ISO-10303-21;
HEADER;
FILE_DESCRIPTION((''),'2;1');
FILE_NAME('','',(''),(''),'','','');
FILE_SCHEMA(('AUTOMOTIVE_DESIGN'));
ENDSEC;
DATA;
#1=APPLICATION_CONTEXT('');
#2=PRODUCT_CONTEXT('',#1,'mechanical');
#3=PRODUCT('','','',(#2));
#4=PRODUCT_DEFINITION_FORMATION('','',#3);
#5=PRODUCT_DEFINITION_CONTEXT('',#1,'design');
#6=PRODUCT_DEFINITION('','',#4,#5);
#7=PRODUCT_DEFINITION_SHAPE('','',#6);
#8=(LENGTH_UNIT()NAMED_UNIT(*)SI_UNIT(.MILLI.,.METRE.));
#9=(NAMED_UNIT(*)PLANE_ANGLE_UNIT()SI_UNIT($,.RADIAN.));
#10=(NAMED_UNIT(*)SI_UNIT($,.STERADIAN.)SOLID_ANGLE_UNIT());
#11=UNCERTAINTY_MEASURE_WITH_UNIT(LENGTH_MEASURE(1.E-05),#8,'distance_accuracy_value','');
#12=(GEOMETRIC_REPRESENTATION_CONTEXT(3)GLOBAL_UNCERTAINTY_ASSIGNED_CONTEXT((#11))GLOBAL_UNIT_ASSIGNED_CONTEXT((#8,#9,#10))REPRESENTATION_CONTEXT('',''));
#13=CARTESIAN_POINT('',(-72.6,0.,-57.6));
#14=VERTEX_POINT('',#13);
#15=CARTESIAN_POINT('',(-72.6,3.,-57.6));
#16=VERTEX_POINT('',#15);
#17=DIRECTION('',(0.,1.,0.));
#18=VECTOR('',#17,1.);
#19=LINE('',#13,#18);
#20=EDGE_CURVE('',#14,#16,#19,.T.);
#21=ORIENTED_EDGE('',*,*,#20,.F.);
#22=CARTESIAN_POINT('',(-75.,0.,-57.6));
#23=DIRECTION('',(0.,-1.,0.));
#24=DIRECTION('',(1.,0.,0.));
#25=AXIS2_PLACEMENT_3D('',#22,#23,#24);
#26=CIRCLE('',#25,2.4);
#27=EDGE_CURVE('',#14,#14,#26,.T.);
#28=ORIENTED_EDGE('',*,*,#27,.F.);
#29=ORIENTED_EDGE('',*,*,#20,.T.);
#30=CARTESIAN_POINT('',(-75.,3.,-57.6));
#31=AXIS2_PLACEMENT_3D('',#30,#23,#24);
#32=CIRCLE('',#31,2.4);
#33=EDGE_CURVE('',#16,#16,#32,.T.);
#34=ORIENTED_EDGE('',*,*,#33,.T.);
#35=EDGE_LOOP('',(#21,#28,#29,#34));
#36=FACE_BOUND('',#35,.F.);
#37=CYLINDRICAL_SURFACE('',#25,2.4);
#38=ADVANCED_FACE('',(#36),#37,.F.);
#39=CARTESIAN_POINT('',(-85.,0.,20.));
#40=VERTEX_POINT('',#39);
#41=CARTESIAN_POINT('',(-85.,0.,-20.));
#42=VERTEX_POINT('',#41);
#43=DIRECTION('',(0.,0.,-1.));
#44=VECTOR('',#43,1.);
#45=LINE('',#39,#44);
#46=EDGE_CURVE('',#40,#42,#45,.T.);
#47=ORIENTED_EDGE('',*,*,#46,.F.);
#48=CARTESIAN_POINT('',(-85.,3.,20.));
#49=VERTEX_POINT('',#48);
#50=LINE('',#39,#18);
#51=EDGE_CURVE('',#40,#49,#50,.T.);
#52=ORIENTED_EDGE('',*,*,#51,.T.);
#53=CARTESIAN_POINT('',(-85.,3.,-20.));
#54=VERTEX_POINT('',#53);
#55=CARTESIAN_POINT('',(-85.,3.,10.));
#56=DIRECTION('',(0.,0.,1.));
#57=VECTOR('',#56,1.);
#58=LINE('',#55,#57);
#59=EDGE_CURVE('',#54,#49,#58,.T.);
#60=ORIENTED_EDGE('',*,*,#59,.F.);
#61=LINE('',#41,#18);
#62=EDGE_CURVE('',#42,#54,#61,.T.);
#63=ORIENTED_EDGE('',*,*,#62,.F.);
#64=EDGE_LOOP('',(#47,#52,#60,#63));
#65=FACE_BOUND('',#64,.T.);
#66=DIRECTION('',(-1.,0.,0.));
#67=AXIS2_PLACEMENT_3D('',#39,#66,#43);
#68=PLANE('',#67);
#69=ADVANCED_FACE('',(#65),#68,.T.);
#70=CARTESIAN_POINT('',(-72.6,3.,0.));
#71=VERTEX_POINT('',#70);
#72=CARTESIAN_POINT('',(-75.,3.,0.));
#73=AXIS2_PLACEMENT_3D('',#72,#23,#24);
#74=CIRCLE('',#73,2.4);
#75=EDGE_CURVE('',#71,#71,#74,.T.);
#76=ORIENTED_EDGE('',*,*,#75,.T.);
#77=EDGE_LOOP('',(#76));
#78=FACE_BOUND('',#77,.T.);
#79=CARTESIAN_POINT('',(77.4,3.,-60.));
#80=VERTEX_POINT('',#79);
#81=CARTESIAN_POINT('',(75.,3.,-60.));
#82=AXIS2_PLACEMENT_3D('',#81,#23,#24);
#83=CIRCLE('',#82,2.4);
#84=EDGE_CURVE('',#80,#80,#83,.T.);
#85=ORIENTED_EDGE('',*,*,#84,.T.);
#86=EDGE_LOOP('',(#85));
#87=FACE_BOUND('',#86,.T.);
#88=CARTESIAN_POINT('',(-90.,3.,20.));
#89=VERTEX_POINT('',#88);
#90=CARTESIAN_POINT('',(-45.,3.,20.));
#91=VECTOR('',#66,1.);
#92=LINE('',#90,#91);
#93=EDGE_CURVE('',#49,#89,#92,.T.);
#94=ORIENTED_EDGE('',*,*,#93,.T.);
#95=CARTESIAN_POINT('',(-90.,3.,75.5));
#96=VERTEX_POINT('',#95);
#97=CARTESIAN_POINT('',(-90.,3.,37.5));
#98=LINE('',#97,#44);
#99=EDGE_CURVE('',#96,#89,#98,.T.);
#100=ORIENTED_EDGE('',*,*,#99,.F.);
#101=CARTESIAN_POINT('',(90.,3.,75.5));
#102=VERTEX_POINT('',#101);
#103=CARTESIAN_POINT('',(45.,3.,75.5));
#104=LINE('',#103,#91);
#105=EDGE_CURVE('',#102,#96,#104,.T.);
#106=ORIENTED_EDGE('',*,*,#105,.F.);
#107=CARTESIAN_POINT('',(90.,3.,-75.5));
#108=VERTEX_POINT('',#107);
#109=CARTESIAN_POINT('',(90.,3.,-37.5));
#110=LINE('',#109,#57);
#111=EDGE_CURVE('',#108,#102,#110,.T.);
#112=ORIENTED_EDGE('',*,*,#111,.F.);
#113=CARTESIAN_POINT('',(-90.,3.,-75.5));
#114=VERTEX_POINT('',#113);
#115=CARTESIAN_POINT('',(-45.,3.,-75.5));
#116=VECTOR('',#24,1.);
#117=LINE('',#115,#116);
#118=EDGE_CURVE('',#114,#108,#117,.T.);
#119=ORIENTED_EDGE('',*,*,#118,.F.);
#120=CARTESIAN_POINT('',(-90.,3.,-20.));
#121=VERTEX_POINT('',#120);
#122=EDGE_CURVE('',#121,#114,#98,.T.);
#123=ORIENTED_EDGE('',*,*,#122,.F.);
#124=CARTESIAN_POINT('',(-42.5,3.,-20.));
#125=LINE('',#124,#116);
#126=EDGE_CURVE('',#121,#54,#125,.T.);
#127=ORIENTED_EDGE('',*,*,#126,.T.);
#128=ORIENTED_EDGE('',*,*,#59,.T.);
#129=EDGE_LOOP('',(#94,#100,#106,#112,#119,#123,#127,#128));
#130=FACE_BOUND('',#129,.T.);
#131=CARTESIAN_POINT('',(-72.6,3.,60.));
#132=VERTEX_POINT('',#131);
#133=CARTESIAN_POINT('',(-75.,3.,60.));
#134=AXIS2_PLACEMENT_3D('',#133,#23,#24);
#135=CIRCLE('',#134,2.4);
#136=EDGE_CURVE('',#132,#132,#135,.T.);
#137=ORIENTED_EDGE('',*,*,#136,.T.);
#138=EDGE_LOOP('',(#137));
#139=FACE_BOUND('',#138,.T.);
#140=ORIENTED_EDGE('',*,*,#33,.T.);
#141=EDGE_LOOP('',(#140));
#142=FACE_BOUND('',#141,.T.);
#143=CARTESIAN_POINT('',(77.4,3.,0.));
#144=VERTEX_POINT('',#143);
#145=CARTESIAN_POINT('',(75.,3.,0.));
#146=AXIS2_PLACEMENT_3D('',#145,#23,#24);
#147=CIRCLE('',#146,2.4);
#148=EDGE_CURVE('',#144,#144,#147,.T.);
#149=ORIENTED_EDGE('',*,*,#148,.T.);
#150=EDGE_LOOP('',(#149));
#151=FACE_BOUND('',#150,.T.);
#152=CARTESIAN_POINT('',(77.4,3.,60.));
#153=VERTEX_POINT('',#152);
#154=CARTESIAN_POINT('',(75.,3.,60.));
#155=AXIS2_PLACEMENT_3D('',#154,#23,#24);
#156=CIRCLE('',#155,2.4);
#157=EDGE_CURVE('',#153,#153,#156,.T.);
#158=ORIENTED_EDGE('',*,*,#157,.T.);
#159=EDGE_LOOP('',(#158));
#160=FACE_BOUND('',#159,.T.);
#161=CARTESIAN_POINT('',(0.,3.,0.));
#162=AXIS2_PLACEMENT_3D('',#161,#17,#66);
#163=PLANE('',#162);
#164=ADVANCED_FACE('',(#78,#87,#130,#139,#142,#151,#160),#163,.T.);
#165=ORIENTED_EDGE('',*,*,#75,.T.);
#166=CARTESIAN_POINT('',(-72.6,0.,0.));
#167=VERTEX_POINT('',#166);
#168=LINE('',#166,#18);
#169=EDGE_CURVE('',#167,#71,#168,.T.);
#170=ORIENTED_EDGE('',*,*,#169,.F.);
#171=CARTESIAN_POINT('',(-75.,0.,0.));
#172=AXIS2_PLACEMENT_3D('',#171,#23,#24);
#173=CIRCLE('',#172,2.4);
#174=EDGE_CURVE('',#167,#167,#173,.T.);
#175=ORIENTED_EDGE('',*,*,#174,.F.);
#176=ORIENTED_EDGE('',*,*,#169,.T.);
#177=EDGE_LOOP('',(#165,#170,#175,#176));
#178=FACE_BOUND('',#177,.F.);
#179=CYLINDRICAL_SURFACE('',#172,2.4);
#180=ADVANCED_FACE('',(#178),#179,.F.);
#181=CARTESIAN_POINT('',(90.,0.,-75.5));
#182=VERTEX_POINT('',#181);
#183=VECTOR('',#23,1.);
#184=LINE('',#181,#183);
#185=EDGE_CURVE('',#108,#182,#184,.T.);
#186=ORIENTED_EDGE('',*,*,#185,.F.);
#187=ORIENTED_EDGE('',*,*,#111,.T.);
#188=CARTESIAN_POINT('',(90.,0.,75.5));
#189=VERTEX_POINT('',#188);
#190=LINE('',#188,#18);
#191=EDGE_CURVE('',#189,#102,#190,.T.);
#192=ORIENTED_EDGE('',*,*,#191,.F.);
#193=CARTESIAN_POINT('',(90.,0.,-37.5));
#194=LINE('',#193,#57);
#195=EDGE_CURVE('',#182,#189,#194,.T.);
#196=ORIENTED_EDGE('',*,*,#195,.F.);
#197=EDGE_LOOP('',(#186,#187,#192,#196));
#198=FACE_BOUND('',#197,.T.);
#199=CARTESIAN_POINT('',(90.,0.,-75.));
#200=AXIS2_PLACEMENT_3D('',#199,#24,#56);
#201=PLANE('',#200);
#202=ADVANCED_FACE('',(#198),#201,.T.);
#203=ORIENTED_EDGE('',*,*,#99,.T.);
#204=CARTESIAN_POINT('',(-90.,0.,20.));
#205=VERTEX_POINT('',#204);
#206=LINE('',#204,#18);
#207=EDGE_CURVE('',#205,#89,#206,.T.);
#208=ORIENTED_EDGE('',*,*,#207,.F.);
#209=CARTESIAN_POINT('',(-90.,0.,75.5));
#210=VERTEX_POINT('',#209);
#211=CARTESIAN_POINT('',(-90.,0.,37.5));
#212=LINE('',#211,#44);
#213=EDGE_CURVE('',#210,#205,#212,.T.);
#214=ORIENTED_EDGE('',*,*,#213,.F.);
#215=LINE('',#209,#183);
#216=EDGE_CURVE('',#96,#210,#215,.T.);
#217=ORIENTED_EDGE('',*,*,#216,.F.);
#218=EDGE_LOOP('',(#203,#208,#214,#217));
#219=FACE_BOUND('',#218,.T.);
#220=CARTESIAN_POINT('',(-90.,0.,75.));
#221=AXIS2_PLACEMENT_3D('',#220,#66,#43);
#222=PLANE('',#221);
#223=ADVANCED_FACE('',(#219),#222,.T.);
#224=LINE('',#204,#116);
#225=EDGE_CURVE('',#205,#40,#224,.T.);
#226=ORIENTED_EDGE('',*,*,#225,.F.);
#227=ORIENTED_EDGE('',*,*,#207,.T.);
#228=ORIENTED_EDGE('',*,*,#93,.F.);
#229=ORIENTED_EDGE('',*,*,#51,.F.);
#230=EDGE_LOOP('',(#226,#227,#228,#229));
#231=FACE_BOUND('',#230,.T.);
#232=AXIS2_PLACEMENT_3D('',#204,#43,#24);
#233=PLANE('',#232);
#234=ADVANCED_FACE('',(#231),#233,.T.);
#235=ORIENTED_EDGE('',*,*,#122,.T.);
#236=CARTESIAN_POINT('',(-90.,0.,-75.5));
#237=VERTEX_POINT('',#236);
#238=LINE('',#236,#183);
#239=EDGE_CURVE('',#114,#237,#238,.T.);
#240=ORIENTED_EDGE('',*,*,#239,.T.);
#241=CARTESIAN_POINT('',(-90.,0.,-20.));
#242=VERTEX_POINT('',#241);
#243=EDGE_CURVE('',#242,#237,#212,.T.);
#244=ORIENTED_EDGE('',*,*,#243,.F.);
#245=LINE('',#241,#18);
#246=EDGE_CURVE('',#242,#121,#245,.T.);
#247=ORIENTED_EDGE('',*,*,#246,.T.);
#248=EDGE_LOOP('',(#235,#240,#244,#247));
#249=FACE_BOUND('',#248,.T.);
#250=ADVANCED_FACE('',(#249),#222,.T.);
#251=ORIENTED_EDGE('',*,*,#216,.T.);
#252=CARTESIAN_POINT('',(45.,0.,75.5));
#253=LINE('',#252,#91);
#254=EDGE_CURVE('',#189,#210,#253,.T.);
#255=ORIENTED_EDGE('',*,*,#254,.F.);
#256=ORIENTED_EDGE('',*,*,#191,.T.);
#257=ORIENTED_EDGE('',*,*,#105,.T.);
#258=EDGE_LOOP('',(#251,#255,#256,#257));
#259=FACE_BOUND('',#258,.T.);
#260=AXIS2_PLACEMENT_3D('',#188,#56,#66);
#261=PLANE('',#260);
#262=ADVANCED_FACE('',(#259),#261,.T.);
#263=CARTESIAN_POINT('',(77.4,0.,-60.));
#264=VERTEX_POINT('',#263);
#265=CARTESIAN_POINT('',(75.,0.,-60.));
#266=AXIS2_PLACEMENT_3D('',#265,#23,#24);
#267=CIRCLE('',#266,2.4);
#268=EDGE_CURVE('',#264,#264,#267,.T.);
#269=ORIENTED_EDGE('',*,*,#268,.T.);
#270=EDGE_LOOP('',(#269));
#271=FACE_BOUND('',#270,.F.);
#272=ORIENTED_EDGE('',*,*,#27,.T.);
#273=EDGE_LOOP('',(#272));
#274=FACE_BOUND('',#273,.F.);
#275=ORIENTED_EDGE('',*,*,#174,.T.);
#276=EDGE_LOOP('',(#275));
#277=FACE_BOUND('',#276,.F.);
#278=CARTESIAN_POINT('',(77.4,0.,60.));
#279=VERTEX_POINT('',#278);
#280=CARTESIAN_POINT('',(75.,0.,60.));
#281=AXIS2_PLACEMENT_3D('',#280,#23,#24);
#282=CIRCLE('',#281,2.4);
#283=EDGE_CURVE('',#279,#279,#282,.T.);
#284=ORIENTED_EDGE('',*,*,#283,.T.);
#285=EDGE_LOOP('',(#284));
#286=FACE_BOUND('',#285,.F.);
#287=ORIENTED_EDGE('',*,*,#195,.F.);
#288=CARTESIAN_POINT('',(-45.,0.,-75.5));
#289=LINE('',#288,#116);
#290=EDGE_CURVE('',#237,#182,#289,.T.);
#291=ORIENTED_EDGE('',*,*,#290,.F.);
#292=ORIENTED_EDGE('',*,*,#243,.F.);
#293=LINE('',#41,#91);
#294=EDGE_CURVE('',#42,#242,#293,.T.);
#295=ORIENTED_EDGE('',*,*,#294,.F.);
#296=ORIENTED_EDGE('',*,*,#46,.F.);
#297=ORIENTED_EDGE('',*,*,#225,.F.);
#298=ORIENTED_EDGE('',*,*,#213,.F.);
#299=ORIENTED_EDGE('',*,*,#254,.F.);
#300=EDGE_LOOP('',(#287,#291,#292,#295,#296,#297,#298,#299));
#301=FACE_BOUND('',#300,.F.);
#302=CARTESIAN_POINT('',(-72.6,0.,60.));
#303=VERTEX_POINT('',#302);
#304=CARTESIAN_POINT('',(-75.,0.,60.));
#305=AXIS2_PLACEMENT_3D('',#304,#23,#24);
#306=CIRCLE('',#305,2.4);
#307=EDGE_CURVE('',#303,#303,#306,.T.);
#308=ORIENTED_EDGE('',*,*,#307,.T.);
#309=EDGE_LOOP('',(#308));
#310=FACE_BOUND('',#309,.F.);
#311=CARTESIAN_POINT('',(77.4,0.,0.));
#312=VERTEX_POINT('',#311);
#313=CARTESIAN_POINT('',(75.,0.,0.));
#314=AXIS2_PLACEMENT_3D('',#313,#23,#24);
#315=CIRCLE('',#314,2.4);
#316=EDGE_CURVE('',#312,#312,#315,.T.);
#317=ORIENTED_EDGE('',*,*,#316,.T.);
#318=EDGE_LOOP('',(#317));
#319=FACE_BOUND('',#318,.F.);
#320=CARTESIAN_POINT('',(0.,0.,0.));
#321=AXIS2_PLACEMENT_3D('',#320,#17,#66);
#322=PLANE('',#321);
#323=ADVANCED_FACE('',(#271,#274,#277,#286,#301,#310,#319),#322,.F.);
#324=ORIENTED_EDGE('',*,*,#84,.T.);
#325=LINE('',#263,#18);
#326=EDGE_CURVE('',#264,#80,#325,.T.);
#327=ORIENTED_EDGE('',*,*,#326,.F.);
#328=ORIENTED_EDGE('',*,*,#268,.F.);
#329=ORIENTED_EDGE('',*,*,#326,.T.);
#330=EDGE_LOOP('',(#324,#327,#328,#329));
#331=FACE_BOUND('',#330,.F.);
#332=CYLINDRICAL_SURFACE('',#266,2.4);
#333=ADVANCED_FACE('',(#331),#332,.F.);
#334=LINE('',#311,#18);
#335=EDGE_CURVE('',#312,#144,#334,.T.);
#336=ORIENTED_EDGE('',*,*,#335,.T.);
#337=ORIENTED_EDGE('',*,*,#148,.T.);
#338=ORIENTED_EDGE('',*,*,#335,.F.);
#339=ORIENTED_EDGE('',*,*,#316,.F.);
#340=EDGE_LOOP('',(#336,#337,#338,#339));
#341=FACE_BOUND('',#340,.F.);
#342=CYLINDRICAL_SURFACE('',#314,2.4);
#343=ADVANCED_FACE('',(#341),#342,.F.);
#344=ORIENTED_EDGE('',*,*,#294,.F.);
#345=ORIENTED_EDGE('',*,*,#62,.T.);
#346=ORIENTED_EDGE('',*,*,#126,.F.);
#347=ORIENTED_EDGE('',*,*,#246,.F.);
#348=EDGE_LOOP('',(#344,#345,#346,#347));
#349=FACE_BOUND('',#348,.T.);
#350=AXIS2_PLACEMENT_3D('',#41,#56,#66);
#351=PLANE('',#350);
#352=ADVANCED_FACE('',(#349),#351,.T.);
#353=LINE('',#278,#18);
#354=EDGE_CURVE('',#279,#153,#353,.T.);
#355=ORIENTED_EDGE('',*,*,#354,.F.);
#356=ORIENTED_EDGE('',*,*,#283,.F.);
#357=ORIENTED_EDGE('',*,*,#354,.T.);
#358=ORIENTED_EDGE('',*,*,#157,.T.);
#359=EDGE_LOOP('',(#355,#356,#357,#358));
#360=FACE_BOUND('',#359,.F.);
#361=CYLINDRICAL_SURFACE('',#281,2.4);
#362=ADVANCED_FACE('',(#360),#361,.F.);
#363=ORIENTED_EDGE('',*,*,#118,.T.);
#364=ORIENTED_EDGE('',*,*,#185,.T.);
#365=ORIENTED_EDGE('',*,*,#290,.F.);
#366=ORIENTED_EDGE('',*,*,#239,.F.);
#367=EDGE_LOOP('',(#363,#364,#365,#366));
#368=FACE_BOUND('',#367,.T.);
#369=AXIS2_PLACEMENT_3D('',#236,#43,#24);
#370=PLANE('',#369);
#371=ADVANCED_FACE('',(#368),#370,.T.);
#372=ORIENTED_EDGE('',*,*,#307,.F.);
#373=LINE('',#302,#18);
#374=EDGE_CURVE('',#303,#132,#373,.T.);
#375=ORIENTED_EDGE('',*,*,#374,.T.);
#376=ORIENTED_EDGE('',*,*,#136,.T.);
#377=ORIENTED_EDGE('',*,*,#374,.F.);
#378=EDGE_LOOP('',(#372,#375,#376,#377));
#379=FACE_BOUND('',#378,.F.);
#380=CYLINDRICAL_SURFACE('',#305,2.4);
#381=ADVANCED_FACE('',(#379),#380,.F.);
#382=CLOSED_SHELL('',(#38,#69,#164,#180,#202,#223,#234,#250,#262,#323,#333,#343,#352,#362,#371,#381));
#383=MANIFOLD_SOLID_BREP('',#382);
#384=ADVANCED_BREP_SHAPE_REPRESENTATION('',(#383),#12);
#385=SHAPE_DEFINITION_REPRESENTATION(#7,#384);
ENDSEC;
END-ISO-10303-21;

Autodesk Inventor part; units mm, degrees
ref_plane "YZ Plane" through (0, 0, 0) normal (1, 0, 0) x (0, 1, 0)
ref_plane "XZ Plane" through (0, 0, 0) normal (0, 1, 0) x (-1, 0, 0)
ref_plane "XY Plane" through (0, 0, 0) normal (0, 0, 1) x (1, 0, 0)
sketch "Sketch1" plane through (0, 0, 0) normal (0, 1, 0) x (-1, 0, 0)
  line L0 (-90, 75) -> (90, 75)
  line L1 (90, 75) -> (90, -75)
  line L2 (90, -75) -> (-90, -75)
  line L3 (-90, -75) -> (-90, 75)
  line L4 (-90, 75) -> (90, -75) construction
  line L5 (90, 75) -> (-90, -75) construction
  point P0 (0, 0)
  dimension "d0" = 180
  dimension "d1" = 150
extrude "Extrusion1" add sketch "Sketch1" along normal blind 3
offset faces "Size1" outward 0.5 faces at (-30, 1, 75) (30, 1, -75)
sketch "Sketch2" plane through (0, 0, 0) normal (0, -1, 0) x (1, 0, 0)
  line L0 (-90, -75.5) -> (-90, 75.5) projected
  line L1 (-90, 20) -> (-85, 20)
  line L2 (-85, 20) -> (-85, -20)
  line L3 (-85, -20) -> (-90, -20)
  line L4 (-90, -20) -> (-90, 20)
  point P0 (0, 0)
  point P1 (-90, -77.5)
  point P2 (-90, 77.5)
  point P3 (-85, 0)
  point P4 (-90, 0)
  dimension "d6" = 40
  dimension "d7" = 5
extrude "Extrusion2" cut sketch "Sketch2" against normal blind 10
sketch "Sketch3" plane through (0, 0, 0) normal (0, -1, 0) x (1, 0, 0)
  circle A0 centre (75, 60) radius 2.4 projected
  circle A1 centre (75, 0) radius 2.4 projected
  circle A2 centre (75, -60) radius 2.4 projected
  circle A3 centre (-75, 60) radius 2.4 projected
  circle A4 centre (-75, 0) radius 2.4 projected
  circle A5 centre (-75, -57.6) radius 2.4
  point P0 (0, 0)
  dimension "d10" = 4.8
extrude "Extrusion3" cut sketch "Sketch3" against normal blind 10
properties part number "Front plane" material "Wood (Birch)"
